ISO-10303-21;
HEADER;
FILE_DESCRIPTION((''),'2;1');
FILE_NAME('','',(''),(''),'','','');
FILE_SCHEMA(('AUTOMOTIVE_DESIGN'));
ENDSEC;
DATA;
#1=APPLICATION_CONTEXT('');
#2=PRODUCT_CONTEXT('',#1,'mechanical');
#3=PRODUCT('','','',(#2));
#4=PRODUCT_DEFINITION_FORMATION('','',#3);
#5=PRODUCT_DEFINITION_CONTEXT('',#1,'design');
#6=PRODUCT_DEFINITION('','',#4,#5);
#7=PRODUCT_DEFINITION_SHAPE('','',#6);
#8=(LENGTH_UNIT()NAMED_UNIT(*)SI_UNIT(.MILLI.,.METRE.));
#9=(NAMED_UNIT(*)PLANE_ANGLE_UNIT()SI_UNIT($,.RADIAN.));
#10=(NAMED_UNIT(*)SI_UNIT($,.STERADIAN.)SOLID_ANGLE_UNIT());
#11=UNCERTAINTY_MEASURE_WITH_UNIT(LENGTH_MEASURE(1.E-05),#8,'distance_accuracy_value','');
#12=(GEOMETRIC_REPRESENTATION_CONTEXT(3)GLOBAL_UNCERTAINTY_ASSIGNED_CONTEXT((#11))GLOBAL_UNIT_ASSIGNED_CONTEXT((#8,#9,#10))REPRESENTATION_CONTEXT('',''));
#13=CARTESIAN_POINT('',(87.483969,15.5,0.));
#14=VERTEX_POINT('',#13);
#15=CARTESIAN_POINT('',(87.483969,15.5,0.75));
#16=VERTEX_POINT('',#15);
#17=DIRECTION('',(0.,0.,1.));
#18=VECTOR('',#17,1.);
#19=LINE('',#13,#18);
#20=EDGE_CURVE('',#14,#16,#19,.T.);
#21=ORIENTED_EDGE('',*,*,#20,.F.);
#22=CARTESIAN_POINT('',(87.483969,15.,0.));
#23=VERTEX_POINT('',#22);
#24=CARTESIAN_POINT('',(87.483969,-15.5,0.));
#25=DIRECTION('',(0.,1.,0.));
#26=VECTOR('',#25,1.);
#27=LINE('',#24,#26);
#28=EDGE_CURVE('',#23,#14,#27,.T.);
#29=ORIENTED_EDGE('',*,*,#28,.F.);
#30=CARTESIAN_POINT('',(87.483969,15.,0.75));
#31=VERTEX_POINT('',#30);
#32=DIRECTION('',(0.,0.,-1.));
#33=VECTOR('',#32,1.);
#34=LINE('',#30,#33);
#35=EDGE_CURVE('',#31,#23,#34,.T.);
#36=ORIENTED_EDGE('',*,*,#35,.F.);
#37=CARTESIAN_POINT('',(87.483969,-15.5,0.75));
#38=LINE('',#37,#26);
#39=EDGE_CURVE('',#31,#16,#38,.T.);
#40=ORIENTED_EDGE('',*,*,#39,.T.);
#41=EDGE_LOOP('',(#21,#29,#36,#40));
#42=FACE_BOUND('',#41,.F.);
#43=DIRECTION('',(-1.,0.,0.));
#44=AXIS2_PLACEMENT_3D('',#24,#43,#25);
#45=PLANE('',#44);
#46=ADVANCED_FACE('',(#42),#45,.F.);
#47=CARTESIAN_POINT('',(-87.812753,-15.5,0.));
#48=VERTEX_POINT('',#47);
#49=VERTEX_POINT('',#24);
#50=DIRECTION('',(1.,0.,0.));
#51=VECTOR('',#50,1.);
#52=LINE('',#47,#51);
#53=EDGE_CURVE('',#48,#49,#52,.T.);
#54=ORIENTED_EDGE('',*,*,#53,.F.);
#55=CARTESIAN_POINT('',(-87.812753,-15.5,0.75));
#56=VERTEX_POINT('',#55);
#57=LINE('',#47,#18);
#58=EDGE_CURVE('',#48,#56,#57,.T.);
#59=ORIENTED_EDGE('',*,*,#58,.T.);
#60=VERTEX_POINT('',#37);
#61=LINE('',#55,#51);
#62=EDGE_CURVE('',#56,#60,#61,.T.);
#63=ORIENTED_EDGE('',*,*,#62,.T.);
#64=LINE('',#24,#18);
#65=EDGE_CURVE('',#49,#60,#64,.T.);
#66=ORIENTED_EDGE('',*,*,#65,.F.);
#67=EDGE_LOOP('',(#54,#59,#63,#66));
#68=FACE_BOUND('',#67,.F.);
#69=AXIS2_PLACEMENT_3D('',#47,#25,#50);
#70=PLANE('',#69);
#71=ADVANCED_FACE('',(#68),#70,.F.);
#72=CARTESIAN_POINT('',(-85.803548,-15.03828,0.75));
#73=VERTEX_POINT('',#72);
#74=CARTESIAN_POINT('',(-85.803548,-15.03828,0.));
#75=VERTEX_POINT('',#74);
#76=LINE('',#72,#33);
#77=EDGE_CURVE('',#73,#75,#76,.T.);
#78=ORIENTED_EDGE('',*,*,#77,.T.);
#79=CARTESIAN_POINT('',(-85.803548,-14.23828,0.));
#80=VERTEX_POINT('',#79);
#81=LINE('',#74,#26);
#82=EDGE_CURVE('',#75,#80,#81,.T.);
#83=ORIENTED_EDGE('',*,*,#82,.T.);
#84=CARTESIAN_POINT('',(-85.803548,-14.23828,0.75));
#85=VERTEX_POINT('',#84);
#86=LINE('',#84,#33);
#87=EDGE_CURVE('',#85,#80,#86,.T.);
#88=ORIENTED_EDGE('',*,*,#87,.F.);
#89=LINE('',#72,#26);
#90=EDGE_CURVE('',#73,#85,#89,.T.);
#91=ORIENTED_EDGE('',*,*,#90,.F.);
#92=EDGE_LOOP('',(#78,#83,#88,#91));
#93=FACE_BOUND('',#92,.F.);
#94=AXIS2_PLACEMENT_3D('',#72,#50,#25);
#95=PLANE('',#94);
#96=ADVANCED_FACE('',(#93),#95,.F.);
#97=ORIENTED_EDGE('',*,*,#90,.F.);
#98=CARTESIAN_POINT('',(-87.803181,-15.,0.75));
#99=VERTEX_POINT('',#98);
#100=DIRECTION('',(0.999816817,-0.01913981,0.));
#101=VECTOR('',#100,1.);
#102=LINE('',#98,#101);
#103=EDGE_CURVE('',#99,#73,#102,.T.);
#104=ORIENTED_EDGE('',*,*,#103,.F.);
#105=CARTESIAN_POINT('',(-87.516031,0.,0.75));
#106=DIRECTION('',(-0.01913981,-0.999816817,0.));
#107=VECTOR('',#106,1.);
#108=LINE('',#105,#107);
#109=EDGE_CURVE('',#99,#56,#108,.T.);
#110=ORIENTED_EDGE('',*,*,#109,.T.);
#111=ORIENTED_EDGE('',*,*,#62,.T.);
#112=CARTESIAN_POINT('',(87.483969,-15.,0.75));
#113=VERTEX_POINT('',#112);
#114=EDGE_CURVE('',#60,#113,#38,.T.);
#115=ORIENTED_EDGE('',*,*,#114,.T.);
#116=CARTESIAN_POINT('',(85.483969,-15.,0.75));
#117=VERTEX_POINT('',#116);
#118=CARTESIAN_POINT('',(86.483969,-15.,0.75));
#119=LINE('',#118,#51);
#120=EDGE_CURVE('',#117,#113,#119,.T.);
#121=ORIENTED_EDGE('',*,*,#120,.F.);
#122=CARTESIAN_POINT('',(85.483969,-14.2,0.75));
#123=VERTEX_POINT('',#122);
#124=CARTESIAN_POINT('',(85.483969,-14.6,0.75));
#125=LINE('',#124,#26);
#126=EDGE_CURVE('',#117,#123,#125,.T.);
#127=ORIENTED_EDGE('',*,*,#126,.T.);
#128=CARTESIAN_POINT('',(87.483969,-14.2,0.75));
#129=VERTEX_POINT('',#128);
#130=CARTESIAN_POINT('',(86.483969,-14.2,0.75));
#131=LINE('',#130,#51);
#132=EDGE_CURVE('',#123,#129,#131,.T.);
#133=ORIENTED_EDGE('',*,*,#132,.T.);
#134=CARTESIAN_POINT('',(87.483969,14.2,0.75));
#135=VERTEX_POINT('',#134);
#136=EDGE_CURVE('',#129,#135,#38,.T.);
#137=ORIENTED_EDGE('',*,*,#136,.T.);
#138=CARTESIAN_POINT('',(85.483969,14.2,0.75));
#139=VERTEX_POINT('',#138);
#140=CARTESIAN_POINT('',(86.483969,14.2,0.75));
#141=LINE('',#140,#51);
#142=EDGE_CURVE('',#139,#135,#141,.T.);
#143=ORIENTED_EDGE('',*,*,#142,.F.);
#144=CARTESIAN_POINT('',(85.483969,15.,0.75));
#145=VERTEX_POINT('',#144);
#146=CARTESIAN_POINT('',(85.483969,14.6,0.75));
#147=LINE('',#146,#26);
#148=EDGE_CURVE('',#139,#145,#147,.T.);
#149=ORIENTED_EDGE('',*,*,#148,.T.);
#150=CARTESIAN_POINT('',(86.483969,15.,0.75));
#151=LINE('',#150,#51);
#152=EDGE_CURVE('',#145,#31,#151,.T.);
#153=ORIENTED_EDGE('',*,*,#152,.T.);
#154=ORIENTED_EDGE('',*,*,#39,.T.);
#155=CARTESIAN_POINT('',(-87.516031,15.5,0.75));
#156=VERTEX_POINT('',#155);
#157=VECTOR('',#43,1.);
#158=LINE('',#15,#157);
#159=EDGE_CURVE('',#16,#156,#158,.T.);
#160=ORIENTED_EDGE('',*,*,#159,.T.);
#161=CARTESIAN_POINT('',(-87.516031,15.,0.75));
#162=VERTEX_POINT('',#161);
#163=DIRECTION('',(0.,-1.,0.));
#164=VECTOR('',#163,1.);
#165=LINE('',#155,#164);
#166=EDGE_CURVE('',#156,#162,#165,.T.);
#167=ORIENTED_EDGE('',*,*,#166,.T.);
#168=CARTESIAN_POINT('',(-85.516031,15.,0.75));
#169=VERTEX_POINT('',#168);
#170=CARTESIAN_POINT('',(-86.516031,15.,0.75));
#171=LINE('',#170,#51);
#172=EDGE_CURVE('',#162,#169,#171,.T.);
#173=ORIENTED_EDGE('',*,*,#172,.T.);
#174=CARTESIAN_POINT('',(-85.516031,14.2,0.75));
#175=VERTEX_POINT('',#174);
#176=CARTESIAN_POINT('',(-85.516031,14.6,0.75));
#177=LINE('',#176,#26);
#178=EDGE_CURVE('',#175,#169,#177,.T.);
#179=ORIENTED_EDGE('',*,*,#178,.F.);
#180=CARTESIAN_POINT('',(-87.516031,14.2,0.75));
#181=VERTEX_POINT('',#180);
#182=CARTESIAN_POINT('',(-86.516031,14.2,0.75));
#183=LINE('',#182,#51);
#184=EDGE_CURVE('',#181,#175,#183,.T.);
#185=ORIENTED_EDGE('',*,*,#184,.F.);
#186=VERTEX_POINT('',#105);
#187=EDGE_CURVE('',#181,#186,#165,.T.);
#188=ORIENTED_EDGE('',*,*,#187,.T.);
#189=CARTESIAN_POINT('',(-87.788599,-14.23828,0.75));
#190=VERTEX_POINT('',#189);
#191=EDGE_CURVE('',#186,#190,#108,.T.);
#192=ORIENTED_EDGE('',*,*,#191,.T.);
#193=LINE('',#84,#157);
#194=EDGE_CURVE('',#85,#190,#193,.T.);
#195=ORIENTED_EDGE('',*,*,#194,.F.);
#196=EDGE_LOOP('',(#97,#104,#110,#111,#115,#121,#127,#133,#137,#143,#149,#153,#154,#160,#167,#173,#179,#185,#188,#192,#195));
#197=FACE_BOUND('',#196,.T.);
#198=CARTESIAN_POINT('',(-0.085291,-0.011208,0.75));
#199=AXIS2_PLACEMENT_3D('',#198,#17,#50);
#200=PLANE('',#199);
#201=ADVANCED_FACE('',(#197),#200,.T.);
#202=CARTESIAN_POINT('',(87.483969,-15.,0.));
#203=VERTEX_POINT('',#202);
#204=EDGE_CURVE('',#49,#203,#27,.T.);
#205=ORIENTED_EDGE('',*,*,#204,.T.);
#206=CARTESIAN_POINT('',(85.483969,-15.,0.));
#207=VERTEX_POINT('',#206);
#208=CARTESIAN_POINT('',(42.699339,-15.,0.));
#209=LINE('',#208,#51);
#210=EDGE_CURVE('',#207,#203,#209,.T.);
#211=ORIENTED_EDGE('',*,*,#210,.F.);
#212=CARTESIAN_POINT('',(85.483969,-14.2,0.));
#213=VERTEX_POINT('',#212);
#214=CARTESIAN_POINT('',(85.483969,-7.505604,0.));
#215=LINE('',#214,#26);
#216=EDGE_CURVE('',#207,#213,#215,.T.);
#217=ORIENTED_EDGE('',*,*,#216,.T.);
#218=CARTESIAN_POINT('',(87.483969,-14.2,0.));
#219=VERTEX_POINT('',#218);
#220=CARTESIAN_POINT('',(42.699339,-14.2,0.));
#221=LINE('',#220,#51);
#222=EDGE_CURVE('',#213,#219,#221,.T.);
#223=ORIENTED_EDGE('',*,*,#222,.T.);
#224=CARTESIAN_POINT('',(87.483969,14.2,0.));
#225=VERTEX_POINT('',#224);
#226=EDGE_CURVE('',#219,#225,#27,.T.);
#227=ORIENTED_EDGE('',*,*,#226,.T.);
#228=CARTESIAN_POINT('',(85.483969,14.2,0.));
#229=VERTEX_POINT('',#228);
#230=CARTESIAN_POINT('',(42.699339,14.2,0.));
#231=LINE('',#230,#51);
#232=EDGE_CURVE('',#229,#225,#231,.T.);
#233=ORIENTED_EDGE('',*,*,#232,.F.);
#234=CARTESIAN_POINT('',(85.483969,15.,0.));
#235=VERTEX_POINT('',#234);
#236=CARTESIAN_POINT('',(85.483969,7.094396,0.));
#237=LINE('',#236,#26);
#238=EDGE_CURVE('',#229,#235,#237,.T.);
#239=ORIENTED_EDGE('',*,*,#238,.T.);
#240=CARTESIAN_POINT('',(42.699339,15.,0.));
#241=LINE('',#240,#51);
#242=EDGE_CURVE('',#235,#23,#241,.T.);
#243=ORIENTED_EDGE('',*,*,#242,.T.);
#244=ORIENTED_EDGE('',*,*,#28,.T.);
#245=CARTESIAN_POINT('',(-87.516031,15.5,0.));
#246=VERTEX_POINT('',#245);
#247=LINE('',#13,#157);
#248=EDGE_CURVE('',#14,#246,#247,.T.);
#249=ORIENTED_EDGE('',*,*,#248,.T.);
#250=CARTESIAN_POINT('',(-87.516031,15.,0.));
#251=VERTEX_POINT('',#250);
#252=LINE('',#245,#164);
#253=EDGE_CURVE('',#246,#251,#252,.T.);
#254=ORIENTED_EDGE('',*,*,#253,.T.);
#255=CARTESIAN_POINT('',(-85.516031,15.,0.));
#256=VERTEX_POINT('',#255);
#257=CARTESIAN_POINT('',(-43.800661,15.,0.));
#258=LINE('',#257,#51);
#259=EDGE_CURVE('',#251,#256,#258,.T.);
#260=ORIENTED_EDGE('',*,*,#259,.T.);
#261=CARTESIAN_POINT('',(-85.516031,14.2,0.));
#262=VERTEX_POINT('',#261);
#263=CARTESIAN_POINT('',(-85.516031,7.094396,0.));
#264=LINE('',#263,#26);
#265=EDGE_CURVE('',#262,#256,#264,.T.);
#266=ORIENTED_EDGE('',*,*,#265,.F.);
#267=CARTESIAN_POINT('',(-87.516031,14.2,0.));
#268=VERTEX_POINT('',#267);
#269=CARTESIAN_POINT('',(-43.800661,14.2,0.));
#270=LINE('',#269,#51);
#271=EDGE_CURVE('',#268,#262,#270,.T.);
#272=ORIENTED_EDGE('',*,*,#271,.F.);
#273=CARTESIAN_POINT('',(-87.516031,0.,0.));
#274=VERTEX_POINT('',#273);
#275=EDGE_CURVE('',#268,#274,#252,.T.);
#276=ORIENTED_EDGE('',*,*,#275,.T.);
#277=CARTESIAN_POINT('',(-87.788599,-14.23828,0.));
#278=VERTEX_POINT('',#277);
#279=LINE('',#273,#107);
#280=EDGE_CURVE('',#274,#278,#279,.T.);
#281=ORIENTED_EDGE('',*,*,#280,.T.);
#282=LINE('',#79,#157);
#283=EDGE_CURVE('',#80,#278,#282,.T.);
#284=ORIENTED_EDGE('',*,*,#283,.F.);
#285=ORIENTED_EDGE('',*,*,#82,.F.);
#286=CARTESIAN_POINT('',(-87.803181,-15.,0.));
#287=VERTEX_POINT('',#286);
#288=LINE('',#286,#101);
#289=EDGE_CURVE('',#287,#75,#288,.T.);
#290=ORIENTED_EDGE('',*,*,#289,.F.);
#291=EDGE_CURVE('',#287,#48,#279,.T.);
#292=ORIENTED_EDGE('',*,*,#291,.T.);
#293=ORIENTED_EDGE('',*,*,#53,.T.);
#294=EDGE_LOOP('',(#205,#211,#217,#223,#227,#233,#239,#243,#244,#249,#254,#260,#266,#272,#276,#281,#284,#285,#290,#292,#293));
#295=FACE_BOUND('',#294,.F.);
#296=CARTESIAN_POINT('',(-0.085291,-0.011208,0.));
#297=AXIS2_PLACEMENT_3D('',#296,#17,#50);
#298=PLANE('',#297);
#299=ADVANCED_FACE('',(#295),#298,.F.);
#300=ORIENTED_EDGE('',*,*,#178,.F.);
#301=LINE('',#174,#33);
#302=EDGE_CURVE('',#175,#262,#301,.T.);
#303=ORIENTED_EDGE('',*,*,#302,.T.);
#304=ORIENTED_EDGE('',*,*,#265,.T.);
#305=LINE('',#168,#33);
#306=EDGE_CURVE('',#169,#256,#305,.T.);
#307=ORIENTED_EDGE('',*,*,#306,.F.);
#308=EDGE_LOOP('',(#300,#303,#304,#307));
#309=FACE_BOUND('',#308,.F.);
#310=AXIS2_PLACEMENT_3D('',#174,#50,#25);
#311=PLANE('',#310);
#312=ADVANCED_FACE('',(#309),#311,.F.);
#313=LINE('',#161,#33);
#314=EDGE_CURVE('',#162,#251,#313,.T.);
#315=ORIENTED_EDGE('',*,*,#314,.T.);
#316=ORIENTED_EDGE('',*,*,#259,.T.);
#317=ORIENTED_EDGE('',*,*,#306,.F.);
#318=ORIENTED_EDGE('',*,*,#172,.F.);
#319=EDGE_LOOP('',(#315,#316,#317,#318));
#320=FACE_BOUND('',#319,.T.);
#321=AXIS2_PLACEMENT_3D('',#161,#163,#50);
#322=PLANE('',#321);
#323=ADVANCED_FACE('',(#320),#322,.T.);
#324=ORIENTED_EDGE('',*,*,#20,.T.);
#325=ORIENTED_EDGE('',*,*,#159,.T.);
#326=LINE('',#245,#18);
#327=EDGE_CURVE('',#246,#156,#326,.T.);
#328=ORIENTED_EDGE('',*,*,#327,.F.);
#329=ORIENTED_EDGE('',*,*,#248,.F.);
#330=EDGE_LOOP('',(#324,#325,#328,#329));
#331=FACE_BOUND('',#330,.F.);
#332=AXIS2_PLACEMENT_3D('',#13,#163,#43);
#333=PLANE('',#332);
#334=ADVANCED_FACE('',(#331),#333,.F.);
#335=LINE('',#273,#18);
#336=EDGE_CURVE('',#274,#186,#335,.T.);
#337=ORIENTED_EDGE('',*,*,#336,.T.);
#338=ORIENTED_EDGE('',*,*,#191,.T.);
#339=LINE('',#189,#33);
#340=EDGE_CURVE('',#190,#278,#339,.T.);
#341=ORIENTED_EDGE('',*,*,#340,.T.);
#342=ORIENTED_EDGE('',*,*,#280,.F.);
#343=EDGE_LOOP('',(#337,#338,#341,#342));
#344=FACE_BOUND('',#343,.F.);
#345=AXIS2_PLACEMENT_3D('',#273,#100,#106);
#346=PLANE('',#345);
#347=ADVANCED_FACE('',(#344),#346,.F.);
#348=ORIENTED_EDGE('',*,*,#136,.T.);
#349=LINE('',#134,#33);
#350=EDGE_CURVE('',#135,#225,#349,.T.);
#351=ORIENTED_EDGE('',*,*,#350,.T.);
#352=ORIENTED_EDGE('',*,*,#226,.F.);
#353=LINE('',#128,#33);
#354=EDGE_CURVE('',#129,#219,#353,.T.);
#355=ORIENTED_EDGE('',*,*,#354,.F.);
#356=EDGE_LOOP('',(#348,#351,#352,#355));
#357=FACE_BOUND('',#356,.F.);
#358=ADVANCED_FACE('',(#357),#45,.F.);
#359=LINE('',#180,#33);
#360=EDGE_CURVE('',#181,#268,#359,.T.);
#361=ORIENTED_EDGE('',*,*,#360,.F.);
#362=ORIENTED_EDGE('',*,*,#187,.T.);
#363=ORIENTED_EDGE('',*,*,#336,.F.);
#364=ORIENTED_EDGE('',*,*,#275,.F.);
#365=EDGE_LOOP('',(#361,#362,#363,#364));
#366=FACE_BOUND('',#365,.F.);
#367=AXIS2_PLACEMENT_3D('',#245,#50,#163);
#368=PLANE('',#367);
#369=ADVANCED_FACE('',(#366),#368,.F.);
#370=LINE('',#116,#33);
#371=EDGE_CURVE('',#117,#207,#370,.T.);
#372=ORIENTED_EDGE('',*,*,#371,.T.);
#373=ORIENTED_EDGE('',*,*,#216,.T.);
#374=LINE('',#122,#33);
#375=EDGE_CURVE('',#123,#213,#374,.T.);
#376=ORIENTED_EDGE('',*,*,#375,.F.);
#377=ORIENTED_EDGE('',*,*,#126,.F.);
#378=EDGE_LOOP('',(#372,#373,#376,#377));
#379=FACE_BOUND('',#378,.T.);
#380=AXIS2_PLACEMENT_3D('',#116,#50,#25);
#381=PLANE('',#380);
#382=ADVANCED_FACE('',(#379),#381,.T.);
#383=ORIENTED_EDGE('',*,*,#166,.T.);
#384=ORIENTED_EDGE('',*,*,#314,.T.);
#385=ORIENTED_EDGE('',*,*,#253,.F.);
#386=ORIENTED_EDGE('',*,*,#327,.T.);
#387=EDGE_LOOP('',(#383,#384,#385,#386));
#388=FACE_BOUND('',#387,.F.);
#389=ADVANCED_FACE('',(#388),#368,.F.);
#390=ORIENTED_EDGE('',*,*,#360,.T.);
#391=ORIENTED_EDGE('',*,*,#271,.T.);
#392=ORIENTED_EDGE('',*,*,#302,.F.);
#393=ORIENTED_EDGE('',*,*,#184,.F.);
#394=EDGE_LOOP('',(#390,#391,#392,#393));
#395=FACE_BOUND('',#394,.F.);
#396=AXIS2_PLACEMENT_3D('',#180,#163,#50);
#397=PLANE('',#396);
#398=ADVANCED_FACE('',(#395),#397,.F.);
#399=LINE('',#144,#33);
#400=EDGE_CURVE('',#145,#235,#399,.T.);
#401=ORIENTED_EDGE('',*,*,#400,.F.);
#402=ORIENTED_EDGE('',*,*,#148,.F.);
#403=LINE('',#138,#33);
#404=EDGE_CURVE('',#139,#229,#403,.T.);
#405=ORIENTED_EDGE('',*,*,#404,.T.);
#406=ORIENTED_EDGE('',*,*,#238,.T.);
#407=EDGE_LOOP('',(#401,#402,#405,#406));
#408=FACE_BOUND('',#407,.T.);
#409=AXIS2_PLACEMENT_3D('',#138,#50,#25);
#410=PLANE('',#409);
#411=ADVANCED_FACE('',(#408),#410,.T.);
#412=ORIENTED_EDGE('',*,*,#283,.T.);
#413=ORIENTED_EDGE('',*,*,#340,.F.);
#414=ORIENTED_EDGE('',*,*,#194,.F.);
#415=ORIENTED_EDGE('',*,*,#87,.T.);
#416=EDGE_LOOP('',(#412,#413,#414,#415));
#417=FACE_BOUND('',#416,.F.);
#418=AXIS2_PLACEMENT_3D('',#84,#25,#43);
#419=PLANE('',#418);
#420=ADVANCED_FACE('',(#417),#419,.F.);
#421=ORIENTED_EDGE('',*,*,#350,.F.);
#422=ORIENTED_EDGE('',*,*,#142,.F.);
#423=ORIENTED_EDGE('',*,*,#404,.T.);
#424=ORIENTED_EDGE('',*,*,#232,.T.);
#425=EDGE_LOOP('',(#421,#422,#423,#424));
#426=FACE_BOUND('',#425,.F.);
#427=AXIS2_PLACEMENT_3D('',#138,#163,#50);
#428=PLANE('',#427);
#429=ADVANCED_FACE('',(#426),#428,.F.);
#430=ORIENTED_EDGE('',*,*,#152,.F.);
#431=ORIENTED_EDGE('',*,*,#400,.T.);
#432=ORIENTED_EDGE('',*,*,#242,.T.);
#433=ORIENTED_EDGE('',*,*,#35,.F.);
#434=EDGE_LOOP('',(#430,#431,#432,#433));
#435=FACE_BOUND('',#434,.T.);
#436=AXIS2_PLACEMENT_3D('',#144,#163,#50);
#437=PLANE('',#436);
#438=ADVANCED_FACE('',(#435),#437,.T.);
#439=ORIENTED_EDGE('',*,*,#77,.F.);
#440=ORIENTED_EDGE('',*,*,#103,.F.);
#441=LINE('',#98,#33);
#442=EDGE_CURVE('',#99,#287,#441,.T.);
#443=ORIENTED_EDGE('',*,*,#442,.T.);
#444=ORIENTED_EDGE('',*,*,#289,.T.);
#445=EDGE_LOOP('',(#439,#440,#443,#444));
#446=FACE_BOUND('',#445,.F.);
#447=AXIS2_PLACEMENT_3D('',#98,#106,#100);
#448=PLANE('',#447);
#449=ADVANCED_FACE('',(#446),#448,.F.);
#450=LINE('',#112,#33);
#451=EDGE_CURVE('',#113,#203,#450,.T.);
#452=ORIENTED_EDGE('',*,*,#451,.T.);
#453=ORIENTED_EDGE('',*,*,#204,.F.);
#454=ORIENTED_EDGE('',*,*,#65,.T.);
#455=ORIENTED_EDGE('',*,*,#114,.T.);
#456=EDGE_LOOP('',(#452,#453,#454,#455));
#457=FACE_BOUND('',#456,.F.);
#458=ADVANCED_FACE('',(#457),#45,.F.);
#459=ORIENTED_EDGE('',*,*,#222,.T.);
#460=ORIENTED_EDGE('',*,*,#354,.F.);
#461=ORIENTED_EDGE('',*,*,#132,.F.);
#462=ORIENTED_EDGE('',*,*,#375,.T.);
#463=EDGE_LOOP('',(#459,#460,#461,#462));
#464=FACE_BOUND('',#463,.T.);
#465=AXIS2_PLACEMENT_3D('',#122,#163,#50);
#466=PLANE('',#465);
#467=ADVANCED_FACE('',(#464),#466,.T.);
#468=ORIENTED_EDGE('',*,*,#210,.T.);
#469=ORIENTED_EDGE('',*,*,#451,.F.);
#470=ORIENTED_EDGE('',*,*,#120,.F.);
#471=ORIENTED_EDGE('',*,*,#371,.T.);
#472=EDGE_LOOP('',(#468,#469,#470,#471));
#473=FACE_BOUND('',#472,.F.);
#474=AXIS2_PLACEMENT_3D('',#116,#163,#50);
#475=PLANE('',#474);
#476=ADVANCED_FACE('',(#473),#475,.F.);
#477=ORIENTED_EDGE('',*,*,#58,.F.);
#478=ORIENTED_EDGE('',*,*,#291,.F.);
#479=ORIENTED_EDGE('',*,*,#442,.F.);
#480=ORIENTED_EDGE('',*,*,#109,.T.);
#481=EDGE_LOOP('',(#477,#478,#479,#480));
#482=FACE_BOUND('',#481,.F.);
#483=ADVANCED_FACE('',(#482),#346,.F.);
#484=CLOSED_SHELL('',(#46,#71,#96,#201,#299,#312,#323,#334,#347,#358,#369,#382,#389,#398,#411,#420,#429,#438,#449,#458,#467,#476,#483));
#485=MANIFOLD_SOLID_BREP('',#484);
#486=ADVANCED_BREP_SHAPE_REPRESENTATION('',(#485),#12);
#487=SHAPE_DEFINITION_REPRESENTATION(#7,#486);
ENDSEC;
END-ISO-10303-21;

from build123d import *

# Parameters (mm, degrees)
F1_DEPTH = 0.75
F3_DEPTH = 0.75
F4_W     = 2
F4_H     = 0.8
F5_DEPTH = 25
F6_W     = 2
F6_H     = 0.8
F7_DEPTH = 0.751
F8_W     = 2
F8_H     = 0.8
F9_DEPTH = 0.751


with BuildPart() as f1:
    # F0 (on Top) → F1 (new body)
    with BuildSketch(Plane.XY):
        Polygon((-87.5160314443, 15.5), (-87.5160314443, 0), (-87.8127528557, -15.5), (87.4839685557, -15.5), (87.4839685557, 15.5), align=None)
    extrude(amount=F1_DEPTH)

    # F2 (on face) → F3 (cut, through all)
    with BuildSketch(Plane.XY.offset(0.75)):
        Polygon((-87.7885993427, -14.2382796203), (-87.8031811973, -15), (-85.8035475632, -15.0382796203), (-85.8035475632, -14.2382796203), align=None)
    extrude(amount=-F3_DEPTH, mode=Mode.SUBTRACT)

    # F4 (on face) → F5 (cut)
    with BuildSketch(Plane.XY.offset(0.75)):
        with Locations((-86.5160314443, 14.6)):
            Rectangle(F4_W, F4_H)
    extrude(amount=-F5_DEPTH, mode=Mode.SUBTRACT)

    # F6 (on face) → F7 (cut, through all)
    with BuildSketch(Plane.XY.offset(0.75)):
        with Locations((86.4839685557, 14.6)):
            Rectangle(F6_W, F6_H)
    extrude(amount=-F7_DEPTH, mode=Mode.SUBTRACT)

    # F8 (on face) → F9 (cut, through all)
    with BuildSketch(Plane.XY.offset(0.75)):
        with Locations((86.4839685557, -14.6)):
            Rectangle(F8_W, F8_H)
    extrude(amount=-F9_DEPTH, mode=Mode.SUBTRACT)


solid = f1.part
